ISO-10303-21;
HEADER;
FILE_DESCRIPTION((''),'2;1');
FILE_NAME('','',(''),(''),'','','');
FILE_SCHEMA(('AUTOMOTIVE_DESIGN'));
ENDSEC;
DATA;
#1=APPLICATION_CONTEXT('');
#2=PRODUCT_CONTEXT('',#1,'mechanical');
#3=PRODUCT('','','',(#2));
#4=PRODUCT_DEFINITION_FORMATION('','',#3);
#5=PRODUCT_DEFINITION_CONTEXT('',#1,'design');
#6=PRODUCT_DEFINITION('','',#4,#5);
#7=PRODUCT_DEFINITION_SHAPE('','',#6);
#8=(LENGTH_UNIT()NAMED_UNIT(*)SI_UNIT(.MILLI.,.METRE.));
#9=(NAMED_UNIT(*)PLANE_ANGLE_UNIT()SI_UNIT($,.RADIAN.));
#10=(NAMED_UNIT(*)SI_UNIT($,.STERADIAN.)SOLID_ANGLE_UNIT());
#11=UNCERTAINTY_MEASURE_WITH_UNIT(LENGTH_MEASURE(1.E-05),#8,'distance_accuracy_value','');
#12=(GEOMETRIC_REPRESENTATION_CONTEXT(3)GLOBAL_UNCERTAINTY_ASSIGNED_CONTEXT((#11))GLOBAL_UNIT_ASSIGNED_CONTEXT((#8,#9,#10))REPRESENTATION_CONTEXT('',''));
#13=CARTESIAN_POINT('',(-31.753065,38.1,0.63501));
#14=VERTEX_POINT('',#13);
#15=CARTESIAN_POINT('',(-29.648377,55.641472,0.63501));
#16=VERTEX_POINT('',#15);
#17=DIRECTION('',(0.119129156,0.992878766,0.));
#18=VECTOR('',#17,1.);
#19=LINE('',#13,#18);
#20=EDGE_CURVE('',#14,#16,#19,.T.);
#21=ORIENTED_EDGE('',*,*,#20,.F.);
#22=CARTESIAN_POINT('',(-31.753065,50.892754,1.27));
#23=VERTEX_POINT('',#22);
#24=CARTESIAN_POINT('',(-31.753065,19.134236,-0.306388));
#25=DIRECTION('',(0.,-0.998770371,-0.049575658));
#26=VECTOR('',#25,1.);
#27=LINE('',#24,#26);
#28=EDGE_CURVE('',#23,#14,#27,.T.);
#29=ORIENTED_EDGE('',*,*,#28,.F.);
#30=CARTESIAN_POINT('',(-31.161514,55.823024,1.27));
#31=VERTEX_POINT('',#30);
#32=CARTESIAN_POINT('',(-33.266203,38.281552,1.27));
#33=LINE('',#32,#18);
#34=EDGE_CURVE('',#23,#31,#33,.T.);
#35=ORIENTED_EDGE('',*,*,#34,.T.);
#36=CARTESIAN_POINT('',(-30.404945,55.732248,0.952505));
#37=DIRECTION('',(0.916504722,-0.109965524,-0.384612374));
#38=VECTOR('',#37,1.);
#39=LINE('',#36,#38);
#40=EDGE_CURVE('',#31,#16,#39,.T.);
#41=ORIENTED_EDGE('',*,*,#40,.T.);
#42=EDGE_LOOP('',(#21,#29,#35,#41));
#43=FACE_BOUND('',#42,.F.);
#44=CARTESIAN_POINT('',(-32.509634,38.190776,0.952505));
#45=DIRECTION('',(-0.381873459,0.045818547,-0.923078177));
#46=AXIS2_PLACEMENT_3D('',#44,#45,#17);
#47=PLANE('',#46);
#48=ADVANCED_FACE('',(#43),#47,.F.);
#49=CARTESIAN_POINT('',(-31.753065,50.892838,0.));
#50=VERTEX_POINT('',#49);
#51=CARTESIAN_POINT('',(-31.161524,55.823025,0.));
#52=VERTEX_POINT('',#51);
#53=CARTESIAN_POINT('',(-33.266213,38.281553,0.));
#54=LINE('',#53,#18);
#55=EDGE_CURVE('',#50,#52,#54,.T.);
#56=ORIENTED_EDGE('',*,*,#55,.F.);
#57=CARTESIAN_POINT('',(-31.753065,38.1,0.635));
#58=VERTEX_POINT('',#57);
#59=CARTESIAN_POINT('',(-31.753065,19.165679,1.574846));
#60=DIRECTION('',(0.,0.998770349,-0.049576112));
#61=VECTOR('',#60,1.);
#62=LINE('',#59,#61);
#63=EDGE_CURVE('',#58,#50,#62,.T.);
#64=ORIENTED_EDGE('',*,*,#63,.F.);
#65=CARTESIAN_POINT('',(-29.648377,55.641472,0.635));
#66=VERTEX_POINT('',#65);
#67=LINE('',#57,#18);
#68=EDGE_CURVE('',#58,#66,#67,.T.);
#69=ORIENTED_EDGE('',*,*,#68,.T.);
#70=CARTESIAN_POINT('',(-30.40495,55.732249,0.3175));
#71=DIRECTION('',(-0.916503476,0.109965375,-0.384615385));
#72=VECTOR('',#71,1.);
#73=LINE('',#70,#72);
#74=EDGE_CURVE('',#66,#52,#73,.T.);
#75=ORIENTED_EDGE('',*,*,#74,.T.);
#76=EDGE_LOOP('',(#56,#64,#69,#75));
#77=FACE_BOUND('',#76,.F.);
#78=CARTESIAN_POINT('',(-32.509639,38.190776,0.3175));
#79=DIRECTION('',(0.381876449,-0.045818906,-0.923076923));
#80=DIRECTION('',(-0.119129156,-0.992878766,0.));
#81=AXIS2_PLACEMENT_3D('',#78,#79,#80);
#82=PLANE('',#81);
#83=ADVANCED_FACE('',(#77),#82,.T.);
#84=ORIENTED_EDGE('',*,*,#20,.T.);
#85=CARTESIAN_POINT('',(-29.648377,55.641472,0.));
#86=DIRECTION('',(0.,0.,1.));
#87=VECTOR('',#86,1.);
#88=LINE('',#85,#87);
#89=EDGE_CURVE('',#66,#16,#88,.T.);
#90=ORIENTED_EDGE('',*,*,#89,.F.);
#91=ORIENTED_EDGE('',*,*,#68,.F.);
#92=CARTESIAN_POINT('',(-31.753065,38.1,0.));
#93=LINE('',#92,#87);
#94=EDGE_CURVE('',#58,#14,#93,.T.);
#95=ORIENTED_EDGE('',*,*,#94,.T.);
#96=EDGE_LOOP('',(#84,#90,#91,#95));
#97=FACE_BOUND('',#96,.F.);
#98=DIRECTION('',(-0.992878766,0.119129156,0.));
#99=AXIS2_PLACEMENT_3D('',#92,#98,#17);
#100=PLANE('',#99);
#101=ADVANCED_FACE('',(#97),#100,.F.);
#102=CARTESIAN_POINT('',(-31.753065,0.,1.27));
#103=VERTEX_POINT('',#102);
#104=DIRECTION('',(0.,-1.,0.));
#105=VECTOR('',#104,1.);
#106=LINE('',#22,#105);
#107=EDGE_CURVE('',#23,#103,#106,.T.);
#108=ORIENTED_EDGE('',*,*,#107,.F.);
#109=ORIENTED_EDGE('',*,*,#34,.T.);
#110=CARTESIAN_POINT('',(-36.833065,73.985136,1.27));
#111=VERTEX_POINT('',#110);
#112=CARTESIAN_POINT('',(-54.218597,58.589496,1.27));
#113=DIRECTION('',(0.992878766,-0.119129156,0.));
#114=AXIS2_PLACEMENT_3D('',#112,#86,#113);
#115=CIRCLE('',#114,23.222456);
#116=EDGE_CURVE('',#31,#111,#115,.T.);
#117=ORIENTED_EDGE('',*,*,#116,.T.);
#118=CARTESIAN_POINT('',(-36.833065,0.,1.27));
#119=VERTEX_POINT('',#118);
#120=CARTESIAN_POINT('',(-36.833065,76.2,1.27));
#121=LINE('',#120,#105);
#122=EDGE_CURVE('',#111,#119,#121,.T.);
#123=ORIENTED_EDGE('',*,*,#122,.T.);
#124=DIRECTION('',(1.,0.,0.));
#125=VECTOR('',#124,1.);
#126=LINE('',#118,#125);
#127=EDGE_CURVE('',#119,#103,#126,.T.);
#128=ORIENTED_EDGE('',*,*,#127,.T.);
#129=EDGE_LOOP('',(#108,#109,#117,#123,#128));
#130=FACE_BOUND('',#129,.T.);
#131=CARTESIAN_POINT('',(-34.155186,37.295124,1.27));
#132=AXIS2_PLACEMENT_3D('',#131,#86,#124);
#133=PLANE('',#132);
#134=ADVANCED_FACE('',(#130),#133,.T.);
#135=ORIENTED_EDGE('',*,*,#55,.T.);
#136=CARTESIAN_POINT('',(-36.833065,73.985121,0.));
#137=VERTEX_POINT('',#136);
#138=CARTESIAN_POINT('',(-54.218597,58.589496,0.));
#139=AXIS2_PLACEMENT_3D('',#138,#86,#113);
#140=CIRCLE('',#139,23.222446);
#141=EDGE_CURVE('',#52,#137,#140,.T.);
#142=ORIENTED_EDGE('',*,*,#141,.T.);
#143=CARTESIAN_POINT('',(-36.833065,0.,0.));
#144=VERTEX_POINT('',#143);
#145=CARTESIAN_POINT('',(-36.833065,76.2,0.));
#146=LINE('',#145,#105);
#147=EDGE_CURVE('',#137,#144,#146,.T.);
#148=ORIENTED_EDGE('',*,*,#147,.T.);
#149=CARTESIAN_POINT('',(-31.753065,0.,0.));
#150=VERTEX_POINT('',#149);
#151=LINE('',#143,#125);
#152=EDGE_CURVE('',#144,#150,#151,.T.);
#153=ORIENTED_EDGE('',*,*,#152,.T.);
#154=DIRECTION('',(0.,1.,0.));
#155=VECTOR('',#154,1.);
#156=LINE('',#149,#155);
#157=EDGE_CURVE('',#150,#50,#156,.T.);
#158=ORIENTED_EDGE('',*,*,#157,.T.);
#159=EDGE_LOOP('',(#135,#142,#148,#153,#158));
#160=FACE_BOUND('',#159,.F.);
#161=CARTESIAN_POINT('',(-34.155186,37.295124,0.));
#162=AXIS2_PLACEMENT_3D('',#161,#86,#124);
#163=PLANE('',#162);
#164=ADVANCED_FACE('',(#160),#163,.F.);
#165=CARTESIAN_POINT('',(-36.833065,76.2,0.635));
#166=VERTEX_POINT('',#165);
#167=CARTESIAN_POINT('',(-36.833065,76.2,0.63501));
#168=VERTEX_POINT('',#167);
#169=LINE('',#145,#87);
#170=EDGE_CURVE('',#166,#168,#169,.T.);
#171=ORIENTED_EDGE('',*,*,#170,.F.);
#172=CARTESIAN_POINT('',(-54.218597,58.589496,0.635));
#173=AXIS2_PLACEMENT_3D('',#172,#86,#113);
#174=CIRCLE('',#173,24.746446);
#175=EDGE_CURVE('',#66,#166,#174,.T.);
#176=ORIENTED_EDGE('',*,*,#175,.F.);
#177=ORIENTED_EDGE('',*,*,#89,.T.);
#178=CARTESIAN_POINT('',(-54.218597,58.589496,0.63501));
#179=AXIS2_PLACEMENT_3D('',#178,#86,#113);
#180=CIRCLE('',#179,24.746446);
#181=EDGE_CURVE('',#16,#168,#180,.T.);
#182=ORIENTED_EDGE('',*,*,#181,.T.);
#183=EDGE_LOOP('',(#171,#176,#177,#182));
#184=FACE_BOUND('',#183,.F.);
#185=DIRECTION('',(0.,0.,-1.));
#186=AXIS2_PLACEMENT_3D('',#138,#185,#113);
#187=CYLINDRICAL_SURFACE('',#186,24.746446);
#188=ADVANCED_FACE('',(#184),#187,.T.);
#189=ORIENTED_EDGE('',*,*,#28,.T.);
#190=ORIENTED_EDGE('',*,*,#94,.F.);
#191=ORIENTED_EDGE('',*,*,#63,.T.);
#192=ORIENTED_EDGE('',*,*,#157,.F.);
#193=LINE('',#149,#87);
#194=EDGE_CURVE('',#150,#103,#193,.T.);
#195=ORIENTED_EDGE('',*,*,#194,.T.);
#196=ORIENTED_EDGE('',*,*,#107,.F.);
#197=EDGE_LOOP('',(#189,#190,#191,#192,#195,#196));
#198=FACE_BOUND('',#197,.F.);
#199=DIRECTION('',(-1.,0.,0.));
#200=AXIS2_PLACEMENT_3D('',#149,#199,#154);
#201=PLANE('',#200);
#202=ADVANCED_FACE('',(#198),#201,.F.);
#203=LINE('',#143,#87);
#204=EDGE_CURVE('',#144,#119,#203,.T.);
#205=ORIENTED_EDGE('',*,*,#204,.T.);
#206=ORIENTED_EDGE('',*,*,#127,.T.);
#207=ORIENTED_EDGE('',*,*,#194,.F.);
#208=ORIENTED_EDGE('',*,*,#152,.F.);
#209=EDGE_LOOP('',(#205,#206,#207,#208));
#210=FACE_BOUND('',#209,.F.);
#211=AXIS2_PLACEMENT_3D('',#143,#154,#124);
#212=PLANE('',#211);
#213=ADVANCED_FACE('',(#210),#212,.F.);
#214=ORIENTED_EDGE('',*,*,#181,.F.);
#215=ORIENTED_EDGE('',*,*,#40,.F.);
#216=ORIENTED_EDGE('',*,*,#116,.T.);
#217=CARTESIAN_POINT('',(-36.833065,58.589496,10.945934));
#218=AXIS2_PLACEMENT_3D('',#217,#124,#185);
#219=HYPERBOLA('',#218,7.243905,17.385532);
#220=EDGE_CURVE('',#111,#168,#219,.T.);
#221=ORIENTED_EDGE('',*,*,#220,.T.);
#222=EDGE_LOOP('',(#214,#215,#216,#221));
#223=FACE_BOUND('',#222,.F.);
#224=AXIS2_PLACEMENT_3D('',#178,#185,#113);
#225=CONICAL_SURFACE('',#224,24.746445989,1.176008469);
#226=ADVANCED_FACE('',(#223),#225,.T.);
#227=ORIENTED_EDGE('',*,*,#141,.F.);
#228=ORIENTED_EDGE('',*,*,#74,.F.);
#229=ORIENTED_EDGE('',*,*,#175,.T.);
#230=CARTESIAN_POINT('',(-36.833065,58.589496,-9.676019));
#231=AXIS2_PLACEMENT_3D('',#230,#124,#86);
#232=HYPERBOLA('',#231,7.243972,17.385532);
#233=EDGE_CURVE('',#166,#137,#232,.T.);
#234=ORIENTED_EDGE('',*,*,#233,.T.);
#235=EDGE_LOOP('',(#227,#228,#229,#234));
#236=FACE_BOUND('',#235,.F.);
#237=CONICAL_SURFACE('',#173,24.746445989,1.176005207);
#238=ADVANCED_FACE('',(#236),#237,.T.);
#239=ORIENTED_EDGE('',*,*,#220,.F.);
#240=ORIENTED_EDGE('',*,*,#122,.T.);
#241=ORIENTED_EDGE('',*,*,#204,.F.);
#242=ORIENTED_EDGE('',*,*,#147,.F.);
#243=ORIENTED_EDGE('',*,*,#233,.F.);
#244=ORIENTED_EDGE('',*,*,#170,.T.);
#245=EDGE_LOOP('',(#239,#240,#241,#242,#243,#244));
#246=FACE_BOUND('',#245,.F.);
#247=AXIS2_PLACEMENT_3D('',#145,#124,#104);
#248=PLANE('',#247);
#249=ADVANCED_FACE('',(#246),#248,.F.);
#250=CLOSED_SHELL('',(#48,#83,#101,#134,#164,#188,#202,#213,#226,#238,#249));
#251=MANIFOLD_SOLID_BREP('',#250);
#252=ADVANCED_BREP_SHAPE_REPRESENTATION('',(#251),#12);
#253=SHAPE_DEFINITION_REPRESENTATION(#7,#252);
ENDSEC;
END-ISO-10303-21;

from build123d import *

# Parameters (mm, degrees)
F1_DEPTH = 1.27
F2_SIZE2 = 1.524
F2_SIZE  = 0.635
F3_SIZE2 = 0.63499
F3_SIZE  = 1.52399


# Not quite as in the source:
# - a fillet or chamfer is up to 0.001 mm smaller than in the source, because OpenCascade refuses the exact size


with BuildPart() as f1:
    # F0 (on Top) → F1 (new body)
    with BuildSketch(Plane.XY):
        with BuildLine():
            Line((-36.8330654015, 25.4), (-36.8330654015, 0))
            Line((-36.8330654015, 0), (-31.7530654015, 0))
            Line((-31.7530654015, 0), (-31.7530654015, 25.4))
            Line((-31.7530654015, 25.4), (-31.7530654015, 38.1))
            Line((-31.7530654015, 38.1), (-29.6483766288, 55.6414723396))
            ThreePointArc((-29.6483766288, 55.6414723396), (-30.8576350362, 66.7535648315), (-36.8330654015, 76.2))
            Line((-36.8330654015, 76.2), (-36.8330654015, 25.4))
        make_face()
    extrude(amount=F1_DEPTH)

    # F2
    f2_edges = [f1.edges().sort_by_distance(p)[0] for p in [
        (-30.857635, 66.753565, 0),
    ]]
    f2_side = f1.faces().sort_by_distance((-30.857635, 66.753565, 0.635))[0]
    chamfer(f2_edges, length=F2_SIZE, length2=F2_SIZE2, reference=f2_side)

    # F3 (size 1.524 and 0.635 in the source; OpenCascade refuses exactly that, so slightly less here)
    f3_edges = [f1.edges().sort_by_distance(p)[0] for p in [
        (-30.857635, 66.753565, 1.27),
    ]]
    f3_side = f1.faces().sort_by_distance((-33.993145, 38.475909, 1.27))[0]
    chamfer(f3_edges, length=F3_SIZE, length2=F3_SIZE2, reference=f3_side)


solid = f1.part
